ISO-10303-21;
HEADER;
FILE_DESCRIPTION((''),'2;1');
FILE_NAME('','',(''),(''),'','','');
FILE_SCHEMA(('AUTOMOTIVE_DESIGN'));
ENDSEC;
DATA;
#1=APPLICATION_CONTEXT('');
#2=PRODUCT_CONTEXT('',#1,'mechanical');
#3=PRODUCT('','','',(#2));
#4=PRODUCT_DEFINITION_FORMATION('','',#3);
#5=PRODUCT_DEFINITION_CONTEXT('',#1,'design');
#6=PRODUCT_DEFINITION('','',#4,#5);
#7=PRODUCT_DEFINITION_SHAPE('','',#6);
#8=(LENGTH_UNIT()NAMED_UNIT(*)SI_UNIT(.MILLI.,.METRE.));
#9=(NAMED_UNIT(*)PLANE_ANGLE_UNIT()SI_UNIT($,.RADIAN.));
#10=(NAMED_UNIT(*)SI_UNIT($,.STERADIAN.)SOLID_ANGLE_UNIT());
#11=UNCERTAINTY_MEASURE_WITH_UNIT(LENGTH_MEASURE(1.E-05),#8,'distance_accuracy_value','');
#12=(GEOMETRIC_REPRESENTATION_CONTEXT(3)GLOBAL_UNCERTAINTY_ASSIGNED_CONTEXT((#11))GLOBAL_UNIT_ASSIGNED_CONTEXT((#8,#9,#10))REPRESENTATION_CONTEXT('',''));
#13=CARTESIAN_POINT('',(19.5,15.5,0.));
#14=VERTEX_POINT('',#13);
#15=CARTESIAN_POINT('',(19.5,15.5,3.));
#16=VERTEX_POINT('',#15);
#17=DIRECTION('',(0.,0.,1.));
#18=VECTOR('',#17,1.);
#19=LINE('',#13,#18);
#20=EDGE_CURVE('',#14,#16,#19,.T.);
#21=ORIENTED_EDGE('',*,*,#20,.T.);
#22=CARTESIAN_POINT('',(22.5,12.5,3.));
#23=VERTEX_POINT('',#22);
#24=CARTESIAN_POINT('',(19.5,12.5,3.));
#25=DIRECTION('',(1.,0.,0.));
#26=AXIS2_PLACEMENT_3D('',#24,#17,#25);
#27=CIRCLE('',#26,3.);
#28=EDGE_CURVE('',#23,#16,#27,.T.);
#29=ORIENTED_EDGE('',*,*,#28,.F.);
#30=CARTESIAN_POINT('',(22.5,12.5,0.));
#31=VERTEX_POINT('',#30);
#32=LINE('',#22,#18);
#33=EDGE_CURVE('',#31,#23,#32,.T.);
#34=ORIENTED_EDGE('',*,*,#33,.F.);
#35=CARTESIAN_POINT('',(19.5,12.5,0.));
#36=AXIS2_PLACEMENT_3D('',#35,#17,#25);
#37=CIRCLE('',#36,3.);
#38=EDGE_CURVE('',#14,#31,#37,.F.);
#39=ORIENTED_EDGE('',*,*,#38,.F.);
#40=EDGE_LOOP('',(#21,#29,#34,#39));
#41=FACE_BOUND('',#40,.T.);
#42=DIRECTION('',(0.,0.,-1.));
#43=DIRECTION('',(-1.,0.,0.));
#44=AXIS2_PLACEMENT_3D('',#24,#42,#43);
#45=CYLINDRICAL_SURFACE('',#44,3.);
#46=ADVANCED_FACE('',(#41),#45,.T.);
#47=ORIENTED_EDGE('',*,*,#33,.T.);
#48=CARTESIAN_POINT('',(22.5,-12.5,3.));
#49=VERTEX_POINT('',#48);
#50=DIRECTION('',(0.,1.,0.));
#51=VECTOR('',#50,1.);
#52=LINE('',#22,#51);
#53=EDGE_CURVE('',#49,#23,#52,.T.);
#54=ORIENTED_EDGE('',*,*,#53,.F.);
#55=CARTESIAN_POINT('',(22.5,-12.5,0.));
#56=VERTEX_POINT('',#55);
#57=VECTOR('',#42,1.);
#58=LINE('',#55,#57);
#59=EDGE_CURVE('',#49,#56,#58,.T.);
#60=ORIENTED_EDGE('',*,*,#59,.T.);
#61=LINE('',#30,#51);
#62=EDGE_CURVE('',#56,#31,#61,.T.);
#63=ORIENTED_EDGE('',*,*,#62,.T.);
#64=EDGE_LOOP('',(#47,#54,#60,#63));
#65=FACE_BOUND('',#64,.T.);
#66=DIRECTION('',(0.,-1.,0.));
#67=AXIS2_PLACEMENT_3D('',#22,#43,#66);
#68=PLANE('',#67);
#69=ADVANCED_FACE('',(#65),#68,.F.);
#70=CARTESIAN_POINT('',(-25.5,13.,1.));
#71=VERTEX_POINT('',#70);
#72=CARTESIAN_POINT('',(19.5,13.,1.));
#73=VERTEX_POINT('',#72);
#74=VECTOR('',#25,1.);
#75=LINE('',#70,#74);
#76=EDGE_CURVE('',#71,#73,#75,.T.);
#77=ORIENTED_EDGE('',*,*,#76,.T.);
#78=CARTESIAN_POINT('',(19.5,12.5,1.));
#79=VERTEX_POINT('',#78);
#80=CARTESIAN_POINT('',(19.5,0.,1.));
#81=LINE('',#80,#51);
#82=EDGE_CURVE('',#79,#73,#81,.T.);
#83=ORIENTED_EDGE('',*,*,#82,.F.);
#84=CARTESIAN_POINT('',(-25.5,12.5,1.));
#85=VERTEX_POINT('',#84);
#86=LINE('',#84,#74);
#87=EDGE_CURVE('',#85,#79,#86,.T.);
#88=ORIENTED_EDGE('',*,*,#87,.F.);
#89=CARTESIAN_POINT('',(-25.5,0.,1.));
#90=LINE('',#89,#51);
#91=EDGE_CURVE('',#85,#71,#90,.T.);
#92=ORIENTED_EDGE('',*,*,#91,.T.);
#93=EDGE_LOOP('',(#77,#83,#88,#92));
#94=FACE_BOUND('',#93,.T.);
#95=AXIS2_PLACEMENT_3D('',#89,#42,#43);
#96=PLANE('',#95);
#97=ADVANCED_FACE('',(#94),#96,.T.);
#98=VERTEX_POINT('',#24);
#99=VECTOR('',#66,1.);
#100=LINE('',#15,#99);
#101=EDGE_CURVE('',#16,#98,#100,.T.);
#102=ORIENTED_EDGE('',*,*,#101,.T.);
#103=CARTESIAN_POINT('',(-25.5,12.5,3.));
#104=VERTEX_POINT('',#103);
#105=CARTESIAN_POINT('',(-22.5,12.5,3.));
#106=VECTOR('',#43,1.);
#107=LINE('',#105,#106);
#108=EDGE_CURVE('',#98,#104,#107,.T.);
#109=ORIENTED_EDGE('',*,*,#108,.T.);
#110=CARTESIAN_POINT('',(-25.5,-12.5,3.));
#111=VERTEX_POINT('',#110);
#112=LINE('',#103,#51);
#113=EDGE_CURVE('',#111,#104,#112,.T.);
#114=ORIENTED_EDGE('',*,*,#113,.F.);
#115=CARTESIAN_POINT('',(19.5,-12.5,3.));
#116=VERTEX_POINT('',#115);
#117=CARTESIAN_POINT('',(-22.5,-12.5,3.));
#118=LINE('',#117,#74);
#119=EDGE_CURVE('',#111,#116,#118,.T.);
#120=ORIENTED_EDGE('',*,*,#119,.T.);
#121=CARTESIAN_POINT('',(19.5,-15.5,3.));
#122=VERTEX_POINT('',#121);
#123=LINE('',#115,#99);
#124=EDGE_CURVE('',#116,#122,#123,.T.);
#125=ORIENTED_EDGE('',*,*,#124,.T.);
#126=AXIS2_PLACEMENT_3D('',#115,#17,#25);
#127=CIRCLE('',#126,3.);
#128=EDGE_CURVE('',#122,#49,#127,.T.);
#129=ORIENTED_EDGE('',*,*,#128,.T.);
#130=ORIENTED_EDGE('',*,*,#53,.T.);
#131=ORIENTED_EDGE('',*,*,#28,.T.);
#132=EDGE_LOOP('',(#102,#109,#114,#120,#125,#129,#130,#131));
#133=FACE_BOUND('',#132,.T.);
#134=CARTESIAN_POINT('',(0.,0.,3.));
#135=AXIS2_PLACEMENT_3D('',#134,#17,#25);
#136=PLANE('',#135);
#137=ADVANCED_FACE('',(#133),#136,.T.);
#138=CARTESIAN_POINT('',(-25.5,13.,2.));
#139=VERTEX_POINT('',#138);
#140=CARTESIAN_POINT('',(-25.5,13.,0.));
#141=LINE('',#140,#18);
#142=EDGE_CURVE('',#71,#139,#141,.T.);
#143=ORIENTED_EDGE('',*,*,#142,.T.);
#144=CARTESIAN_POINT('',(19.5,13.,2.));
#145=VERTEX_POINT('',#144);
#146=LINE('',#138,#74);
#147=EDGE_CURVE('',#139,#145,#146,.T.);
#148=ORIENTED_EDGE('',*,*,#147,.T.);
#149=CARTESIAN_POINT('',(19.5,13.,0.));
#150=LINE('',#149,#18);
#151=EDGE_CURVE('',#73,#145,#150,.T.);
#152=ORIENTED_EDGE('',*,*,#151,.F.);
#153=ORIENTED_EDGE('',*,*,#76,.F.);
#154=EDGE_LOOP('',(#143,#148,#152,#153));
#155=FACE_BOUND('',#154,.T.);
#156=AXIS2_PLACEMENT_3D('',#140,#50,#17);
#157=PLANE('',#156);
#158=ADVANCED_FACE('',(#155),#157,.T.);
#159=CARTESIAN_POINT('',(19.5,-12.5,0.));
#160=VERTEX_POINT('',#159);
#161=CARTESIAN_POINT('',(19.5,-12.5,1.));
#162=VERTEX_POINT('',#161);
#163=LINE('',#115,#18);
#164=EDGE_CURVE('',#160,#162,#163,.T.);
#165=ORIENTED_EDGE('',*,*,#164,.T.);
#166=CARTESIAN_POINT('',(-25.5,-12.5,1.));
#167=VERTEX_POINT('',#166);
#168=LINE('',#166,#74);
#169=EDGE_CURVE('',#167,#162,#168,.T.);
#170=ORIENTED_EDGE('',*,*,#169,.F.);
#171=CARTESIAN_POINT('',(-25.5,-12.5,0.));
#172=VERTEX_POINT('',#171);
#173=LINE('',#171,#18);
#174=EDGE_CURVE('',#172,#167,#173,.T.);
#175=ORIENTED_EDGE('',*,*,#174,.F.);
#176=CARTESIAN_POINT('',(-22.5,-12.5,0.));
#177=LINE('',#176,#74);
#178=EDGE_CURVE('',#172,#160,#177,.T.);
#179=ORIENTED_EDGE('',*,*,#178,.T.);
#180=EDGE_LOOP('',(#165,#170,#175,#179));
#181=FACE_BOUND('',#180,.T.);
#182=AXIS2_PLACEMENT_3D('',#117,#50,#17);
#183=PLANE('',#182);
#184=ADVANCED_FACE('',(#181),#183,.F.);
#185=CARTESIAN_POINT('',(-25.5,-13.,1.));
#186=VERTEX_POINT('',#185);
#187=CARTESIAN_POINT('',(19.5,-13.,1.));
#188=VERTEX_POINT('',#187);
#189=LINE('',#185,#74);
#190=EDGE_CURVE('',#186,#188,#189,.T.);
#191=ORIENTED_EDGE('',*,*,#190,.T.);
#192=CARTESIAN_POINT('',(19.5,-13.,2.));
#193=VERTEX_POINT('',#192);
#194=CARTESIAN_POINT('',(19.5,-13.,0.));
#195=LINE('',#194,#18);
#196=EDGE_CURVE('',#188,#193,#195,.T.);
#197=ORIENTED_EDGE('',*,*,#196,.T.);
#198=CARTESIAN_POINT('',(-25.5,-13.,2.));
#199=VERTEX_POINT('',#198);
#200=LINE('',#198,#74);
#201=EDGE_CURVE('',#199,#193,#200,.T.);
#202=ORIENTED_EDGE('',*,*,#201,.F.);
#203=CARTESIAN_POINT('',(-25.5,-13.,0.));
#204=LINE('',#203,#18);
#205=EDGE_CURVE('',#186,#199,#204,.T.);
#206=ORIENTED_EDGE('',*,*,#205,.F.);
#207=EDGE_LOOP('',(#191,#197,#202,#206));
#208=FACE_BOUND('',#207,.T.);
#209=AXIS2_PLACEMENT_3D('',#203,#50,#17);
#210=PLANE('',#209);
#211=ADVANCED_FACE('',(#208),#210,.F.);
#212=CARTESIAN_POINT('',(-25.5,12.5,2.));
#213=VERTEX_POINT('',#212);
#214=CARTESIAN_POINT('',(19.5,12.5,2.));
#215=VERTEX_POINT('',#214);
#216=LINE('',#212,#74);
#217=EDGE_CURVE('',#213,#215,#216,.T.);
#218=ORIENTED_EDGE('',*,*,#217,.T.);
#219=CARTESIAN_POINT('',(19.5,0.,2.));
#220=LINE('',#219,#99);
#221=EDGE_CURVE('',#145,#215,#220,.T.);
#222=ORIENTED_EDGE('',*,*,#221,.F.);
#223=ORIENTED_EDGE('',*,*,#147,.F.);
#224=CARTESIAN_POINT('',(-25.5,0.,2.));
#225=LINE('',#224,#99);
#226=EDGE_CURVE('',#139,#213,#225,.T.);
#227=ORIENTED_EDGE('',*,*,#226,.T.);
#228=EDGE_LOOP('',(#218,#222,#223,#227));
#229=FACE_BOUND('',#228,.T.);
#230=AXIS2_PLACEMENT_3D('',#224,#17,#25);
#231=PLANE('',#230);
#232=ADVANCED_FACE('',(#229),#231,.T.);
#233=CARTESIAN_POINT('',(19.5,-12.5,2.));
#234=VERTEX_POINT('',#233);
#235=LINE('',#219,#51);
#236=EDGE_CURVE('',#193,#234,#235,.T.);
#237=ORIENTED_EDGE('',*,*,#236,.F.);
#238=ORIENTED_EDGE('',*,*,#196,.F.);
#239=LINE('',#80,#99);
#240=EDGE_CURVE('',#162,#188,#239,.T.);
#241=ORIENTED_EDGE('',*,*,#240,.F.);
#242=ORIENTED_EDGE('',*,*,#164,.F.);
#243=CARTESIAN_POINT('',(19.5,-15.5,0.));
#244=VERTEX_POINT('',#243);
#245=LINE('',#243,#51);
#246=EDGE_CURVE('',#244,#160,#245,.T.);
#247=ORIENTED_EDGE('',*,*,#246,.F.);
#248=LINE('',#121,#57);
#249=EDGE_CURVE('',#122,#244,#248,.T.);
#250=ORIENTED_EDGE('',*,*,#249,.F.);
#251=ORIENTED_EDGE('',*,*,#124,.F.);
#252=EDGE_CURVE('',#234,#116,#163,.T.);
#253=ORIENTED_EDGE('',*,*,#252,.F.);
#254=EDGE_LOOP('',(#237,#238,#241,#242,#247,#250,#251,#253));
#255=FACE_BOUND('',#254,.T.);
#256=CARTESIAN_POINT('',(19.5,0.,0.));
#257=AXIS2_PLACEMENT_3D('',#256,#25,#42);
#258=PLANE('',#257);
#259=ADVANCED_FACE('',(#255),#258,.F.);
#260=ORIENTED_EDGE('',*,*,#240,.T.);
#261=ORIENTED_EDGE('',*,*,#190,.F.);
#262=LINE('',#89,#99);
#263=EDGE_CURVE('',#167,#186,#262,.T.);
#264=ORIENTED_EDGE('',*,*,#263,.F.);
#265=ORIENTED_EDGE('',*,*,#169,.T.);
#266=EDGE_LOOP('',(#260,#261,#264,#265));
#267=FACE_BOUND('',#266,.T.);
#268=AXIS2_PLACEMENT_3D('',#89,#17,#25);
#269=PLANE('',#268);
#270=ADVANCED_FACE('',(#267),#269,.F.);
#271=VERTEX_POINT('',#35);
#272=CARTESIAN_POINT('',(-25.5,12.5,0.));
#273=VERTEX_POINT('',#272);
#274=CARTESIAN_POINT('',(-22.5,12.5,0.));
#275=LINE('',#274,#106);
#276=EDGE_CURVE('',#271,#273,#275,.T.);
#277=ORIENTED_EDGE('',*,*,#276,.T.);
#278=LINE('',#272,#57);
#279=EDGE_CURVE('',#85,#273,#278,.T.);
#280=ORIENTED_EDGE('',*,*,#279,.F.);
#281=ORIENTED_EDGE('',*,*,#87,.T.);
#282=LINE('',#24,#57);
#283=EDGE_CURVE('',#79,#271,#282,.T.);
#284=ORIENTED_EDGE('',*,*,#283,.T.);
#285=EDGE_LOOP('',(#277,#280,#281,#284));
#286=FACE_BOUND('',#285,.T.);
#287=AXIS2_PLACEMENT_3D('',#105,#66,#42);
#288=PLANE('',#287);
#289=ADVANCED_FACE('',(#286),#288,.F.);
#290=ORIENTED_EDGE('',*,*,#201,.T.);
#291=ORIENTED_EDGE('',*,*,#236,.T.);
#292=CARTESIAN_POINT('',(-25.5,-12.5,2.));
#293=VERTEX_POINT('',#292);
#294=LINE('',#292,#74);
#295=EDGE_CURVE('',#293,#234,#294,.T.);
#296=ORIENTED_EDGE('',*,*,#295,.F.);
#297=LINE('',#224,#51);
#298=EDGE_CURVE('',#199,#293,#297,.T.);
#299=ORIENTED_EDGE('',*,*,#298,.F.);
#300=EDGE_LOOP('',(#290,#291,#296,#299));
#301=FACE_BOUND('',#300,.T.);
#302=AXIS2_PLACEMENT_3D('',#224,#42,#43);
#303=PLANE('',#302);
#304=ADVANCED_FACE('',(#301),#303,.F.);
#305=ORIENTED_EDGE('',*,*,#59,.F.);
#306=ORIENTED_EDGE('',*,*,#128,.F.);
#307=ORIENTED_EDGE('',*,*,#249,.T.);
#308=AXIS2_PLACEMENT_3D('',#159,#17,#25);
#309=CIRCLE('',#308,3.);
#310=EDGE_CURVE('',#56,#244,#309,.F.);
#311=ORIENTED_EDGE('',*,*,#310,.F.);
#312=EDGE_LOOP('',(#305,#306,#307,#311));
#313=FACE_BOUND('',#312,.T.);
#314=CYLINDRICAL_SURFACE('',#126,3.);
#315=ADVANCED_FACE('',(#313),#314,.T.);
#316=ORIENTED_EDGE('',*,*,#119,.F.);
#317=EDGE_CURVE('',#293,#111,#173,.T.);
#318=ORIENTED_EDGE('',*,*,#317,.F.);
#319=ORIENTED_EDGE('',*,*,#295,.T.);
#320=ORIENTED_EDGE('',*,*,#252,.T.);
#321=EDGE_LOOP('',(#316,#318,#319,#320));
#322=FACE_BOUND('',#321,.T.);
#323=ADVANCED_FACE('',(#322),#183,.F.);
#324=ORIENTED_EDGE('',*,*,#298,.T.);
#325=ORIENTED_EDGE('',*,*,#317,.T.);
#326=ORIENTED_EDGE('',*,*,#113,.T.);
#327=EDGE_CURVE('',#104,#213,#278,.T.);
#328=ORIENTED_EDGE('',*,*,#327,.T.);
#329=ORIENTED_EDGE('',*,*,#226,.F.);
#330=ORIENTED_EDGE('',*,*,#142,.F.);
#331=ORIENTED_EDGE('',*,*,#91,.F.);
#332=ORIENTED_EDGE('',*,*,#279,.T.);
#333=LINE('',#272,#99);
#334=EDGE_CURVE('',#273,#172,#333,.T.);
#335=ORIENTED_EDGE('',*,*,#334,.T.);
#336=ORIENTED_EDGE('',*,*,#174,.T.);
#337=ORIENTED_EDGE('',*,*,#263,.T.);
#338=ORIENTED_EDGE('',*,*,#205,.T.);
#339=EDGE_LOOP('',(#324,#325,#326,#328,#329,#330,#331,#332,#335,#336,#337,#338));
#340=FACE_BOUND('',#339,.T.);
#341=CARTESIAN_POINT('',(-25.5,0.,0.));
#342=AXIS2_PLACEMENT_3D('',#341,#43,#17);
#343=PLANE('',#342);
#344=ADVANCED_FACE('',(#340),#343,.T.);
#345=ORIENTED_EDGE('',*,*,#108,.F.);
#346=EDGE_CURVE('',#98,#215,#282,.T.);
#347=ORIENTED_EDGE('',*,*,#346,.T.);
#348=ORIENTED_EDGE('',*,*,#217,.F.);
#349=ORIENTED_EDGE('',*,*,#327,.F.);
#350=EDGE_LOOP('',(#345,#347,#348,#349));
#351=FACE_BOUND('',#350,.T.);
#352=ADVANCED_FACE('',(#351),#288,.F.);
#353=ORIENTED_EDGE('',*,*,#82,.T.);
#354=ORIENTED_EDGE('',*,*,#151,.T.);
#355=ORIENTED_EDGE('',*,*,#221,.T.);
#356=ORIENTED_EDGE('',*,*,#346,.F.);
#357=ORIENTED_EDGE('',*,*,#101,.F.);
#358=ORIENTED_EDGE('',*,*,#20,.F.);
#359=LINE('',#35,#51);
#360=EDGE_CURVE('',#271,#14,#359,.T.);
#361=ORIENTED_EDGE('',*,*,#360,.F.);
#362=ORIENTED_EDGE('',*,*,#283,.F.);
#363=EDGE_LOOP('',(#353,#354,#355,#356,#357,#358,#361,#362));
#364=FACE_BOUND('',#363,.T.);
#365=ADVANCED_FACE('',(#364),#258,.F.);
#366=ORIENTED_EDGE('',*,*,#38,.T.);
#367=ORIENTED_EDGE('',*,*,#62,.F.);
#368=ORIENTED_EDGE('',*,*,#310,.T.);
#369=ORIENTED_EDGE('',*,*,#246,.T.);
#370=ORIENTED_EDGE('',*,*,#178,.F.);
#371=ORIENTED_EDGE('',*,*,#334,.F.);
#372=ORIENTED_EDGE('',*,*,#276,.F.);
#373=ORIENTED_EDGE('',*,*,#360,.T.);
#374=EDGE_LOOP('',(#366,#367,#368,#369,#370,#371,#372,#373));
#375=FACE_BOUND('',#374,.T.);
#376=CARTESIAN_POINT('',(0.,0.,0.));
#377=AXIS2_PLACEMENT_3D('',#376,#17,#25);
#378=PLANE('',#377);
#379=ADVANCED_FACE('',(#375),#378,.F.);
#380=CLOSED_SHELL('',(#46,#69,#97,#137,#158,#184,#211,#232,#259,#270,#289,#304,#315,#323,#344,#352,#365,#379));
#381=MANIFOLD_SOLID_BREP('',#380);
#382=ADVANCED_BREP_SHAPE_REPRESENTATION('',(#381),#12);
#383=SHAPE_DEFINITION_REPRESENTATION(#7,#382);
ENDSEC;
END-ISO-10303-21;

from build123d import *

# Parameters (mm, degrees)
SKETCH1_W           = 45
SKETCH1_H           = 25
BOSS_EXTRUDE1_DEPTH = 3
SKETCH2_W           = 3
SKETCH2_H           = 3
BOSS_EXTRUDE2_DEPTH = 3
SKETCH3_W           = 1
SKETCH3_H           = 0.5
BOSS_EXTRUDE3_DEPTH = 45
SKETCH4_W           = 3
SKETCH4_H           = 25
BOSS_EXTRUDE4_DEPTH = 3
FILLET1_R           = 3


with BuildPart() as part:
    # Sketch1 → Boss-Extrude1 (new body)
    with BuildSketch(Plane.XY):
        Rectangle(SKETCH1_W, SKETCH1_H)
    extrude(amount=BOSS_EXTRUDE1_DEPTH)

    # Sketch2 → Boss-Extrude2 (add)
    with BuildSketch(Plane(origin=(22.5, 0, 0), x_dir=(0, 0, -1), z_dir=(1, 0, 0))):
        with Locations((-1.5, -14)):
            Rectangle(SKETCH2_W, SKETCH2_H)
        with Locations((-1.5, 14)):
            Rectangle(SKETCH2_W, SKETCH2_H)
    extrude(amount=-BOSS_EXTRUDE2_DEPTH)

    # Sketch3 → Boss-Extrude3 (add)
    with BuildSketch(Plane.ZY.offset(-19.5)):
        with Locations((1.5, -12.75)):
            Rectangle(SKETCH3_W, SKETCH3_H)
        with Locations((1.5, 12.75)):
            Rectangle(SKETCH3_W, SKETCH3_H)
    extrude(amount=BOSS_EXTRUDE3_DEPTH)

    # Sketch4 → Boss-Extrude4 (add)
    with BuildSketch(Plane.ZY.offset(22.5)):
        with Locations((1.5, 0)):
            Rectangle(SKETCH4_W, SKETCH4_H)
    extrude(amount=BOSS_EXTRUDE4_DEPTH)

    # Fillet1
    fillet1_edges = [part.edges().sort_by_distance(p)[0] for p in [
        (22.5, 15.5, 1.5),
        (22.5, -15.5, 1.5),
    ]]
    fillet(fillet1_edges, radius=FILLET1_R - 0.0001)  # a hair under: the kernel refuses the full size


solid = part.part
